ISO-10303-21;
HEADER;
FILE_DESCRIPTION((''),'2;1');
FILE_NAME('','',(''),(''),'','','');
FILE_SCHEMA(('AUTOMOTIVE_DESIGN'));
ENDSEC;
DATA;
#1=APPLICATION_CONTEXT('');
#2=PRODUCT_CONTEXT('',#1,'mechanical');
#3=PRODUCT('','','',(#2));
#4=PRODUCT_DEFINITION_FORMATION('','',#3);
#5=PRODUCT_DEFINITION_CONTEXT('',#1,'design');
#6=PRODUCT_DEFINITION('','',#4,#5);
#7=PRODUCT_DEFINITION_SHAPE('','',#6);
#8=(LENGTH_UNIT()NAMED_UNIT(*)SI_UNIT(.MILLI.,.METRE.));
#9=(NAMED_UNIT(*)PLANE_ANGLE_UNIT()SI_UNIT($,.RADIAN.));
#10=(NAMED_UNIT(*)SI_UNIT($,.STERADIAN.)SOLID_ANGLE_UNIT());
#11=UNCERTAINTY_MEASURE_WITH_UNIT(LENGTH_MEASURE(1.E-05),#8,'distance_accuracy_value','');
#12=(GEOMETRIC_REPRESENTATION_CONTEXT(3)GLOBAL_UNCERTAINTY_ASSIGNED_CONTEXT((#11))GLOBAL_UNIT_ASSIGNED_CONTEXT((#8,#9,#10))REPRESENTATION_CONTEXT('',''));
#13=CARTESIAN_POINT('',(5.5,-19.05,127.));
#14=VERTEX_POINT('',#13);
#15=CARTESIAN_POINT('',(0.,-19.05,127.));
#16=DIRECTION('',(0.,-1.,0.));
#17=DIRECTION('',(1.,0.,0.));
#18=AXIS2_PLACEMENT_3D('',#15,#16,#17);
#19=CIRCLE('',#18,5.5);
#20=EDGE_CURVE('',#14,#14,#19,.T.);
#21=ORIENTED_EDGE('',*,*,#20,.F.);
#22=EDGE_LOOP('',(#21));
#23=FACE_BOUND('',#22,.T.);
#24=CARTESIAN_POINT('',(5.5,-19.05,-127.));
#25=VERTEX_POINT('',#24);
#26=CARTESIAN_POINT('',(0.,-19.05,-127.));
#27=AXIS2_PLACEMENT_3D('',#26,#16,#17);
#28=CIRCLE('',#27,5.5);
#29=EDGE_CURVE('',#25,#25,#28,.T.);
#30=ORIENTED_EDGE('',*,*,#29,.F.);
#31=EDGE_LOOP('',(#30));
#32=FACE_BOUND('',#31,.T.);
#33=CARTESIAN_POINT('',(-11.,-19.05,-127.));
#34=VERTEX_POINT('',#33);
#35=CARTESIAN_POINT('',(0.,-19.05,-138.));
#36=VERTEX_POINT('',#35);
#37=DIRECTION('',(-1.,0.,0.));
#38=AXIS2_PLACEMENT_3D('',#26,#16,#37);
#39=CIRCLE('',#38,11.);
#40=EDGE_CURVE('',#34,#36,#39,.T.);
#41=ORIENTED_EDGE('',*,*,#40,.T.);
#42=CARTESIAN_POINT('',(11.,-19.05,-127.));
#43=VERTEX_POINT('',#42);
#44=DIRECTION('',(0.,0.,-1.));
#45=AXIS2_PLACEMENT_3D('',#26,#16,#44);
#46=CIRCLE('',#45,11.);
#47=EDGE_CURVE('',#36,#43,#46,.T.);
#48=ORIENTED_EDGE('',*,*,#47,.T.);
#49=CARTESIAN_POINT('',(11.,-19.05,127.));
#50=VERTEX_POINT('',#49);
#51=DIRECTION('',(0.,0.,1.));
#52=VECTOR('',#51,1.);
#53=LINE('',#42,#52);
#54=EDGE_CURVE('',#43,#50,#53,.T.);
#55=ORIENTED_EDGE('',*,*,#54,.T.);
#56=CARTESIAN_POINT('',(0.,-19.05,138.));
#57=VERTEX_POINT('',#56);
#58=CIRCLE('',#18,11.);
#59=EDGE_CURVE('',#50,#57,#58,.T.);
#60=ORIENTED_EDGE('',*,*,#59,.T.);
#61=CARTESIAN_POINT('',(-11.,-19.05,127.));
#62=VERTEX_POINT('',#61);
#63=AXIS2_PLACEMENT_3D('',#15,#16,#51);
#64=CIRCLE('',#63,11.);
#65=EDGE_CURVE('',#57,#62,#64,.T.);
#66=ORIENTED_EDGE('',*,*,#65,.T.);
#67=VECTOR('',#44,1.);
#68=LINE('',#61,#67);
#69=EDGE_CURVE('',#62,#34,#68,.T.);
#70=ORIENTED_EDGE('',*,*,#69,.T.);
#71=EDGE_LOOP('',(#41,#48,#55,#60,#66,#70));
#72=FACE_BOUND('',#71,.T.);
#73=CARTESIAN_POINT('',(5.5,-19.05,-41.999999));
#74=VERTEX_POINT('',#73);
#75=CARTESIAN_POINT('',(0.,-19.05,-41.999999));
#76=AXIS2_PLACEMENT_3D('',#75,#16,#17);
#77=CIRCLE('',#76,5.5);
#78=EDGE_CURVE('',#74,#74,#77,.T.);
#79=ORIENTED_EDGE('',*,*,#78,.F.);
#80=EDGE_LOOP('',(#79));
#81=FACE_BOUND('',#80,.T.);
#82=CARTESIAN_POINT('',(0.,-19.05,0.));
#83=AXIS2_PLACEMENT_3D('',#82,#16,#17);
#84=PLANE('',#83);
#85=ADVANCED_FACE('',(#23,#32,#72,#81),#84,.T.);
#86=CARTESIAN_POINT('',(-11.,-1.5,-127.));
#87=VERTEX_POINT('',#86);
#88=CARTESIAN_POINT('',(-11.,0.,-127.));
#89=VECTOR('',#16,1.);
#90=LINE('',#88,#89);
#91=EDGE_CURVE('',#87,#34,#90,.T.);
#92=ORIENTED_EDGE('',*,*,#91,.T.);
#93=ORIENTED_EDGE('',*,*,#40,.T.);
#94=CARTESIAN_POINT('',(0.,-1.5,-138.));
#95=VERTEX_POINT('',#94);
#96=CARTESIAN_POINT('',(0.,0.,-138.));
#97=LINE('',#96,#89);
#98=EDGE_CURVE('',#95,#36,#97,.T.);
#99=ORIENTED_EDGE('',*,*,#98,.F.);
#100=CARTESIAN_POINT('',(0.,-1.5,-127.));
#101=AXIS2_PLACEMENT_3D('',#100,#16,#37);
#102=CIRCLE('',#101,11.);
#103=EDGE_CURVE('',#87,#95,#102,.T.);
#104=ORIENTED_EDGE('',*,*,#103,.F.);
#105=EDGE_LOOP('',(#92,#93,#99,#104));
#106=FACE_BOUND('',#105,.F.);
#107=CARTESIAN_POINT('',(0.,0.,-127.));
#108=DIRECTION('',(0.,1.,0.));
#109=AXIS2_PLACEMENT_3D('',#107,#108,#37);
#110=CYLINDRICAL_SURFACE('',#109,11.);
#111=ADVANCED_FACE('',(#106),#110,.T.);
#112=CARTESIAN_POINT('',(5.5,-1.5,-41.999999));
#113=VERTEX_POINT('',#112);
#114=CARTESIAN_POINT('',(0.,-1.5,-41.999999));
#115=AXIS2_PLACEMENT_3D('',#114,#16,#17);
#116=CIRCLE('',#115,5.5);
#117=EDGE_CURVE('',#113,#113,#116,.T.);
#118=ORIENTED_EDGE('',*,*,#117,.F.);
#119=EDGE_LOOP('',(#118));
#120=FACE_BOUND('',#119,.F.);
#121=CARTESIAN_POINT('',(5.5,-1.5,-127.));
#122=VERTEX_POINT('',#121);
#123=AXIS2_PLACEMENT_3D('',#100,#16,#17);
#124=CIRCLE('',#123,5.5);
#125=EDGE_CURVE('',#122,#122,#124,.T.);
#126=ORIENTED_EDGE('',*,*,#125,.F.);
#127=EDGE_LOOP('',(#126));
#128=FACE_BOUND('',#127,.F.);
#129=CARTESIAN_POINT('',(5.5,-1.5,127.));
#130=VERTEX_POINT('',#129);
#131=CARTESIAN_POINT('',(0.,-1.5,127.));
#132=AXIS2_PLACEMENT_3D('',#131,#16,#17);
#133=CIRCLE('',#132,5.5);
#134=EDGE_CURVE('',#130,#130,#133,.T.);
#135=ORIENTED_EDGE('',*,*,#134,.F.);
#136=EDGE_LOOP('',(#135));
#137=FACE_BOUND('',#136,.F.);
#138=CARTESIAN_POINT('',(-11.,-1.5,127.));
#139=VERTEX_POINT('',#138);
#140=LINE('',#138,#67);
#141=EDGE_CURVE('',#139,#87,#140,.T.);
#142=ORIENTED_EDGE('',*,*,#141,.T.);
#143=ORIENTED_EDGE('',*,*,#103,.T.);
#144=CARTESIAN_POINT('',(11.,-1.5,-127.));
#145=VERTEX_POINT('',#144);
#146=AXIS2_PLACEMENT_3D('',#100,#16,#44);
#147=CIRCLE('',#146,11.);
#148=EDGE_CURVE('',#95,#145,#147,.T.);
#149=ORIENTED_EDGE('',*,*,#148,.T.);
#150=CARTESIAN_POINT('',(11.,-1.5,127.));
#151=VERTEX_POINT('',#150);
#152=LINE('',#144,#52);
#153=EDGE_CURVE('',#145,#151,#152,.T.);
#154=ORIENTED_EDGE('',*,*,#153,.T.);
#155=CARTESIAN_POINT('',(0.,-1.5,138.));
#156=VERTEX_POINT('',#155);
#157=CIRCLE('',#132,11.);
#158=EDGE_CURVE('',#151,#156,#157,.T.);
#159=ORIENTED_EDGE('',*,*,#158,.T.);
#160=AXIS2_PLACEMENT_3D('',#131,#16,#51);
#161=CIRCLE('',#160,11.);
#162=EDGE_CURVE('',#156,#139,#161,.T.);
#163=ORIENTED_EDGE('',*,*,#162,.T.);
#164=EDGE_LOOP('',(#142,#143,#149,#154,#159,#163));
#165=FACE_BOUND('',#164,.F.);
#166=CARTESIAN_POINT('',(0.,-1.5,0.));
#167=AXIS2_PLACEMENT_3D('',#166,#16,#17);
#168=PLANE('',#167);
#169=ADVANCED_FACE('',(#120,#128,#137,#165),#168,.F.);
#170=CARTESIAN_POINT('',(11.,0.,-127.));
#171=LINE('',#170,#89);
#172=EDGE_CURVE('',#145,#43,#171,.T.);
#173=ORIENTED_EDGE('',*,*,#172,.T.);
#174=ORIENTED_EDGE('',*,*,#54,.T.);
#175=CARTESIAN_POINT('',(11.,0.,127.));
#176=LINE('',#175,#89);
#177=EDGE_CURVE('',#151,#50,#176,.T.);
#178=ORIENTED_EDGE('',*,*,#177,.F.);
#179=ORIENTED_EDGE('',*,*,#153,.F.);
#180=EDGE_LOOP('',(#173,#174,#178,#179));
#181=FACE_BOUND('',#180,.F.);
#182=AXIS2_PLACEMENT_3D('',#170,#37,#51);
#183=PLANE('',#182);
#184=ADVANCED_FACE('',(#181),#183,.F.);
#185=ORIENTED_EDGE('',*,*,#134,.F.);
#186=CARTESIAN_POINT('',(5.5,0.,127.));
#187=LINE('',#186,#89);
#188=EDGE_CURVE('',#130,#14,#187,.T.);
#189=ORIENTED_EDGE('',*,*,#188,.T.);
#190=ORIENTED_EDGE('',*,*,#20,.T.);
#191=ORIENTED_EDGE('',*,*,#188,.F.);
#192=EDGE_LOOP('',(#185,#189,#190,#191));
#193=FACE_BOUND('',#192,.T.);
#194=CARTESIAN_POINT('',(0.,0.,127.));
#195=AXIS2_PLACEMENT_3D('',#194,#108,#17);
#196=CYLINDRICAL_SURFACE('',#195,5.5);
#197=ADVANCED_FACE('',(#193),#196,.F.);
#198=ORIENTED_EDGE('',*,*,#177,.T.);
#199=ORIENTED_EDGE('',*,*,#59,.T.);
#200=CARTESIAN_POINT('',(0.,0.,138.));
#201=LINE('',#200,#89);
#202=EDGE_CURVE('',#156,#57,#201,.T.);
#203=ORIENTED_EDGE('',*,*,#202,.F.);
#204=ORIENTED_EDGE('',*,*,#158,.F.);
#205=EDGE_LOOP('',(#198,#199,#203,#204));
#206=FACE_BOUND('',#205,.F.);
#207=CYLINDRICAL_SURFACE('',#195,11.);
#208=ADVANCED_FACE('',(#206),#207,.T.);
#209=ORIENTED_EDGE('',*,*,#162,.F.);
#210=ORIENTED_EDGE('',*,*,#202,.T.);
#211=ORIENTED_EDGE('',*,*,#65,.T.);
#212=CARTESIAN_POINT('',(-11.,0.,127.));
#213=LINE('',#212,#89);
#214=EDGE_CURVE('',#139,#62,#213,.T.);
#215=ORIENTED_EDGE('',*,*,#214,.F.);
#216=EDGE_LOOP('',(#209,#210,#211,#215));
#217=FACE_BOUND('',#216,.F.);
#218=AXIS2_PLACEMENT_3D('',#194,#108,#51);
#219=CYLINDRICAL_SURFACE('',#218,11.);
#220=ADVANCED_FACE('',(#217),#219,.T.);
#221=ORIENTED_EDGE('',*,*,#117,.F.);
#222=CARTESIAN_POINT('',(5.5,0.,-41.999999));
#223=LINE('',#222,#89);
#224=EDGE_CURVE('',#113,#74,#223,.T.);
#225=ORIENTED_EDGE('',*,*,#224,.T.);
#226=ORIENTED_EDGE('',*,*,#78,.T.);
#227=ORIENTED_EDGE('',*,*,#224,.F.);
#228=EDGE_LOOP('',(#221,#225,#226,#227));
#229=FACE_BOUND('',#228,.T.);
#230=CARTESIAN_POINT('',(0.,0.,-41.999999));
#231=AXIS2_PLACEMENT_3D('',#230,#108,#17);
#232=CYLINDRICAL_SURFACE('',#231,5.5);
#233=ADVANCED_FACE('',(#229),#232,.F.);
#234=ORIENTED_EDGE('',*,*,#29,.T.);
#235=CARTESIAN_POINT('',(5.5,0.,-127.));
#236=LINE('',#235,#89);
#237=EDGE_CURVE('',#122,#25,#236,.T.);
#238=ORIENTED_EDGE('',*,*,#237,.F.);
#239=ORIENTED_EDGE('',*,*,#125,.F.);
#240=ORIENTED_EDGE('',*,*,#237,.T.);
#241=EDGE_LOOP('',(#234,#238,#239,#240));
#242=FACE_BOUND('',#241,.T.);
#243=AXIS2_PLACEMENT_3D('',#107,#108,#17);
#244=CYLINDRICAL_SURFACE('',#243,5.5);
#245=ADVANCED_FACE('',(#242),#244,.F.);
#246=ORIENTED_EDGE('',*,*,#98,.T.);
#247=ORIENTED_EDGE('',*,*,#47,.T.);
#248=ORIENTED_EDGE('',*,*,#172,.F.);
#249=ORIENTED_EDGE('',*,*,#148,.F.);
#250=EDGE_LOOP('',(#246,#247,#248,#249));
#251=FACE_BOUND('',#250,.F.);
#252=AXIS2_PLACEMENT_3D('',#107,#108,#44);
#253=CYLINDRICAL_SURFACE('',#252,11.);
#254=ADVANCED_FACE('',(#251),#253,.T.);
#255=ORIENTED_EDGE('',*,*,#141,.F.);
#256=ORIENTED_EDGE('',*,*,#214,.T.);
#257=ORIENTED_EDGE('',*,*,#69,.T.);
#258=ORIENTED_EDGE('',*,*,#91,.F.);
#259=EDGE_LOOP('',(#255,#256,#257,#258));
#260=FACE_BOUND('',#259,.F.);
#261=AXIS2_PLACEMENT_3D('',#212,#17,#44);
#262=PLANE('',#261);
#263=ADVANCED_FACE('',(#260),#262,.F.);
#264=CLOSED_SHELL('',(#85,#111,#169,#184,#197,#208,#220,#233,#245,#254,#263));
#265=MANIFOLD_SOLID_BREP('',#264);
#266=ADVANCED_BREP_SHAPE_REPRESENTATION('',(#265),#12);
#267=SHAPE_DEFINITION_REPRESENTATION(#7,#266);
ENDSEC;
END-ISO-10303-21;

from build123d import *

# Parameters (mm, degrees)
F0_R     = 5.5
F1_DEPTH = 19.05
F2_DEPTH = 1.5


# Not quite as in the source:
# - a length typed as a fraction of an inch, garbled in the dataset ("3 / 203.2 mm" for 3/8 in), is restored
# - a feature names something its author has since deleted; it is built from what else it names


with BuildPart() as f1:
    # F0 (on Front) → F1 (new body)
    with BuildSketch(Plane.XZ):
        with BuildLine():
            Line((11, -127), (11, 127))
            ThreePointArc((11, 127), (7.7781745931, 134.7781745931), (0, 138))
            ThreePointArc((0, 138), (-7.7781745931, 134.7781745931), (-11, 127))
            Line((-11, 127), (-11, -127))
            ThreePointArc((-11, -127), (-7.7781745931, -134.7781745931), (0, -138))
            ThreePointArc((0, -138), (7.7781745931, -134.7781745931), (11, -127))
        make_face()
        with Locations((0, -127)):
            Circle(F0_R, mode=Mode.SUBTRACT)
        with Locations((0, -41.9999994338)):
            Circle(F0_R, mode=Mode.SUBTRACT)
        with Locations((0, 127)):
            Circle(F0_R, mode=Mode.SUBTRACT)
    extrude(amount=F1_DEPTH)

    # F0 (on Front) → F2 (cut)
    with BuildSketch(Plane.XZ):
        with BuildLine():
            Line((11, -127), (11, 127))
            ThreePointArc((11, 127), (7.7781745931, 134.7781745931), (0, 138))
            ThreePointArc((0, 138), (-7.7781745931, 134.7781745931), (-11, 127))
            Line((-11, 127), (-11, -127))
            ThreePointArc((-11, -127), (-7.7781745931, -134.7781745931), (0, -138))
            ThreePointArc((0, -138), (7.7781745931, -134.7781745931), (11, -127))
        make_face()
        with Locations((0, -127)):
            Circle(F0_R, mode=Mode.SUBTRACT)
        with Locations((0, -41.9999994338)):
            Circle(F0_R, mode=Mode.SUBTRACT)
        with Locations((0, 127)):
            Circle(F0_R, mode=Mode.SUBTRACT)
    extrude(amount=F2_DEPTH, mode=Mode.SUBTRACT)


solid = f1.part
